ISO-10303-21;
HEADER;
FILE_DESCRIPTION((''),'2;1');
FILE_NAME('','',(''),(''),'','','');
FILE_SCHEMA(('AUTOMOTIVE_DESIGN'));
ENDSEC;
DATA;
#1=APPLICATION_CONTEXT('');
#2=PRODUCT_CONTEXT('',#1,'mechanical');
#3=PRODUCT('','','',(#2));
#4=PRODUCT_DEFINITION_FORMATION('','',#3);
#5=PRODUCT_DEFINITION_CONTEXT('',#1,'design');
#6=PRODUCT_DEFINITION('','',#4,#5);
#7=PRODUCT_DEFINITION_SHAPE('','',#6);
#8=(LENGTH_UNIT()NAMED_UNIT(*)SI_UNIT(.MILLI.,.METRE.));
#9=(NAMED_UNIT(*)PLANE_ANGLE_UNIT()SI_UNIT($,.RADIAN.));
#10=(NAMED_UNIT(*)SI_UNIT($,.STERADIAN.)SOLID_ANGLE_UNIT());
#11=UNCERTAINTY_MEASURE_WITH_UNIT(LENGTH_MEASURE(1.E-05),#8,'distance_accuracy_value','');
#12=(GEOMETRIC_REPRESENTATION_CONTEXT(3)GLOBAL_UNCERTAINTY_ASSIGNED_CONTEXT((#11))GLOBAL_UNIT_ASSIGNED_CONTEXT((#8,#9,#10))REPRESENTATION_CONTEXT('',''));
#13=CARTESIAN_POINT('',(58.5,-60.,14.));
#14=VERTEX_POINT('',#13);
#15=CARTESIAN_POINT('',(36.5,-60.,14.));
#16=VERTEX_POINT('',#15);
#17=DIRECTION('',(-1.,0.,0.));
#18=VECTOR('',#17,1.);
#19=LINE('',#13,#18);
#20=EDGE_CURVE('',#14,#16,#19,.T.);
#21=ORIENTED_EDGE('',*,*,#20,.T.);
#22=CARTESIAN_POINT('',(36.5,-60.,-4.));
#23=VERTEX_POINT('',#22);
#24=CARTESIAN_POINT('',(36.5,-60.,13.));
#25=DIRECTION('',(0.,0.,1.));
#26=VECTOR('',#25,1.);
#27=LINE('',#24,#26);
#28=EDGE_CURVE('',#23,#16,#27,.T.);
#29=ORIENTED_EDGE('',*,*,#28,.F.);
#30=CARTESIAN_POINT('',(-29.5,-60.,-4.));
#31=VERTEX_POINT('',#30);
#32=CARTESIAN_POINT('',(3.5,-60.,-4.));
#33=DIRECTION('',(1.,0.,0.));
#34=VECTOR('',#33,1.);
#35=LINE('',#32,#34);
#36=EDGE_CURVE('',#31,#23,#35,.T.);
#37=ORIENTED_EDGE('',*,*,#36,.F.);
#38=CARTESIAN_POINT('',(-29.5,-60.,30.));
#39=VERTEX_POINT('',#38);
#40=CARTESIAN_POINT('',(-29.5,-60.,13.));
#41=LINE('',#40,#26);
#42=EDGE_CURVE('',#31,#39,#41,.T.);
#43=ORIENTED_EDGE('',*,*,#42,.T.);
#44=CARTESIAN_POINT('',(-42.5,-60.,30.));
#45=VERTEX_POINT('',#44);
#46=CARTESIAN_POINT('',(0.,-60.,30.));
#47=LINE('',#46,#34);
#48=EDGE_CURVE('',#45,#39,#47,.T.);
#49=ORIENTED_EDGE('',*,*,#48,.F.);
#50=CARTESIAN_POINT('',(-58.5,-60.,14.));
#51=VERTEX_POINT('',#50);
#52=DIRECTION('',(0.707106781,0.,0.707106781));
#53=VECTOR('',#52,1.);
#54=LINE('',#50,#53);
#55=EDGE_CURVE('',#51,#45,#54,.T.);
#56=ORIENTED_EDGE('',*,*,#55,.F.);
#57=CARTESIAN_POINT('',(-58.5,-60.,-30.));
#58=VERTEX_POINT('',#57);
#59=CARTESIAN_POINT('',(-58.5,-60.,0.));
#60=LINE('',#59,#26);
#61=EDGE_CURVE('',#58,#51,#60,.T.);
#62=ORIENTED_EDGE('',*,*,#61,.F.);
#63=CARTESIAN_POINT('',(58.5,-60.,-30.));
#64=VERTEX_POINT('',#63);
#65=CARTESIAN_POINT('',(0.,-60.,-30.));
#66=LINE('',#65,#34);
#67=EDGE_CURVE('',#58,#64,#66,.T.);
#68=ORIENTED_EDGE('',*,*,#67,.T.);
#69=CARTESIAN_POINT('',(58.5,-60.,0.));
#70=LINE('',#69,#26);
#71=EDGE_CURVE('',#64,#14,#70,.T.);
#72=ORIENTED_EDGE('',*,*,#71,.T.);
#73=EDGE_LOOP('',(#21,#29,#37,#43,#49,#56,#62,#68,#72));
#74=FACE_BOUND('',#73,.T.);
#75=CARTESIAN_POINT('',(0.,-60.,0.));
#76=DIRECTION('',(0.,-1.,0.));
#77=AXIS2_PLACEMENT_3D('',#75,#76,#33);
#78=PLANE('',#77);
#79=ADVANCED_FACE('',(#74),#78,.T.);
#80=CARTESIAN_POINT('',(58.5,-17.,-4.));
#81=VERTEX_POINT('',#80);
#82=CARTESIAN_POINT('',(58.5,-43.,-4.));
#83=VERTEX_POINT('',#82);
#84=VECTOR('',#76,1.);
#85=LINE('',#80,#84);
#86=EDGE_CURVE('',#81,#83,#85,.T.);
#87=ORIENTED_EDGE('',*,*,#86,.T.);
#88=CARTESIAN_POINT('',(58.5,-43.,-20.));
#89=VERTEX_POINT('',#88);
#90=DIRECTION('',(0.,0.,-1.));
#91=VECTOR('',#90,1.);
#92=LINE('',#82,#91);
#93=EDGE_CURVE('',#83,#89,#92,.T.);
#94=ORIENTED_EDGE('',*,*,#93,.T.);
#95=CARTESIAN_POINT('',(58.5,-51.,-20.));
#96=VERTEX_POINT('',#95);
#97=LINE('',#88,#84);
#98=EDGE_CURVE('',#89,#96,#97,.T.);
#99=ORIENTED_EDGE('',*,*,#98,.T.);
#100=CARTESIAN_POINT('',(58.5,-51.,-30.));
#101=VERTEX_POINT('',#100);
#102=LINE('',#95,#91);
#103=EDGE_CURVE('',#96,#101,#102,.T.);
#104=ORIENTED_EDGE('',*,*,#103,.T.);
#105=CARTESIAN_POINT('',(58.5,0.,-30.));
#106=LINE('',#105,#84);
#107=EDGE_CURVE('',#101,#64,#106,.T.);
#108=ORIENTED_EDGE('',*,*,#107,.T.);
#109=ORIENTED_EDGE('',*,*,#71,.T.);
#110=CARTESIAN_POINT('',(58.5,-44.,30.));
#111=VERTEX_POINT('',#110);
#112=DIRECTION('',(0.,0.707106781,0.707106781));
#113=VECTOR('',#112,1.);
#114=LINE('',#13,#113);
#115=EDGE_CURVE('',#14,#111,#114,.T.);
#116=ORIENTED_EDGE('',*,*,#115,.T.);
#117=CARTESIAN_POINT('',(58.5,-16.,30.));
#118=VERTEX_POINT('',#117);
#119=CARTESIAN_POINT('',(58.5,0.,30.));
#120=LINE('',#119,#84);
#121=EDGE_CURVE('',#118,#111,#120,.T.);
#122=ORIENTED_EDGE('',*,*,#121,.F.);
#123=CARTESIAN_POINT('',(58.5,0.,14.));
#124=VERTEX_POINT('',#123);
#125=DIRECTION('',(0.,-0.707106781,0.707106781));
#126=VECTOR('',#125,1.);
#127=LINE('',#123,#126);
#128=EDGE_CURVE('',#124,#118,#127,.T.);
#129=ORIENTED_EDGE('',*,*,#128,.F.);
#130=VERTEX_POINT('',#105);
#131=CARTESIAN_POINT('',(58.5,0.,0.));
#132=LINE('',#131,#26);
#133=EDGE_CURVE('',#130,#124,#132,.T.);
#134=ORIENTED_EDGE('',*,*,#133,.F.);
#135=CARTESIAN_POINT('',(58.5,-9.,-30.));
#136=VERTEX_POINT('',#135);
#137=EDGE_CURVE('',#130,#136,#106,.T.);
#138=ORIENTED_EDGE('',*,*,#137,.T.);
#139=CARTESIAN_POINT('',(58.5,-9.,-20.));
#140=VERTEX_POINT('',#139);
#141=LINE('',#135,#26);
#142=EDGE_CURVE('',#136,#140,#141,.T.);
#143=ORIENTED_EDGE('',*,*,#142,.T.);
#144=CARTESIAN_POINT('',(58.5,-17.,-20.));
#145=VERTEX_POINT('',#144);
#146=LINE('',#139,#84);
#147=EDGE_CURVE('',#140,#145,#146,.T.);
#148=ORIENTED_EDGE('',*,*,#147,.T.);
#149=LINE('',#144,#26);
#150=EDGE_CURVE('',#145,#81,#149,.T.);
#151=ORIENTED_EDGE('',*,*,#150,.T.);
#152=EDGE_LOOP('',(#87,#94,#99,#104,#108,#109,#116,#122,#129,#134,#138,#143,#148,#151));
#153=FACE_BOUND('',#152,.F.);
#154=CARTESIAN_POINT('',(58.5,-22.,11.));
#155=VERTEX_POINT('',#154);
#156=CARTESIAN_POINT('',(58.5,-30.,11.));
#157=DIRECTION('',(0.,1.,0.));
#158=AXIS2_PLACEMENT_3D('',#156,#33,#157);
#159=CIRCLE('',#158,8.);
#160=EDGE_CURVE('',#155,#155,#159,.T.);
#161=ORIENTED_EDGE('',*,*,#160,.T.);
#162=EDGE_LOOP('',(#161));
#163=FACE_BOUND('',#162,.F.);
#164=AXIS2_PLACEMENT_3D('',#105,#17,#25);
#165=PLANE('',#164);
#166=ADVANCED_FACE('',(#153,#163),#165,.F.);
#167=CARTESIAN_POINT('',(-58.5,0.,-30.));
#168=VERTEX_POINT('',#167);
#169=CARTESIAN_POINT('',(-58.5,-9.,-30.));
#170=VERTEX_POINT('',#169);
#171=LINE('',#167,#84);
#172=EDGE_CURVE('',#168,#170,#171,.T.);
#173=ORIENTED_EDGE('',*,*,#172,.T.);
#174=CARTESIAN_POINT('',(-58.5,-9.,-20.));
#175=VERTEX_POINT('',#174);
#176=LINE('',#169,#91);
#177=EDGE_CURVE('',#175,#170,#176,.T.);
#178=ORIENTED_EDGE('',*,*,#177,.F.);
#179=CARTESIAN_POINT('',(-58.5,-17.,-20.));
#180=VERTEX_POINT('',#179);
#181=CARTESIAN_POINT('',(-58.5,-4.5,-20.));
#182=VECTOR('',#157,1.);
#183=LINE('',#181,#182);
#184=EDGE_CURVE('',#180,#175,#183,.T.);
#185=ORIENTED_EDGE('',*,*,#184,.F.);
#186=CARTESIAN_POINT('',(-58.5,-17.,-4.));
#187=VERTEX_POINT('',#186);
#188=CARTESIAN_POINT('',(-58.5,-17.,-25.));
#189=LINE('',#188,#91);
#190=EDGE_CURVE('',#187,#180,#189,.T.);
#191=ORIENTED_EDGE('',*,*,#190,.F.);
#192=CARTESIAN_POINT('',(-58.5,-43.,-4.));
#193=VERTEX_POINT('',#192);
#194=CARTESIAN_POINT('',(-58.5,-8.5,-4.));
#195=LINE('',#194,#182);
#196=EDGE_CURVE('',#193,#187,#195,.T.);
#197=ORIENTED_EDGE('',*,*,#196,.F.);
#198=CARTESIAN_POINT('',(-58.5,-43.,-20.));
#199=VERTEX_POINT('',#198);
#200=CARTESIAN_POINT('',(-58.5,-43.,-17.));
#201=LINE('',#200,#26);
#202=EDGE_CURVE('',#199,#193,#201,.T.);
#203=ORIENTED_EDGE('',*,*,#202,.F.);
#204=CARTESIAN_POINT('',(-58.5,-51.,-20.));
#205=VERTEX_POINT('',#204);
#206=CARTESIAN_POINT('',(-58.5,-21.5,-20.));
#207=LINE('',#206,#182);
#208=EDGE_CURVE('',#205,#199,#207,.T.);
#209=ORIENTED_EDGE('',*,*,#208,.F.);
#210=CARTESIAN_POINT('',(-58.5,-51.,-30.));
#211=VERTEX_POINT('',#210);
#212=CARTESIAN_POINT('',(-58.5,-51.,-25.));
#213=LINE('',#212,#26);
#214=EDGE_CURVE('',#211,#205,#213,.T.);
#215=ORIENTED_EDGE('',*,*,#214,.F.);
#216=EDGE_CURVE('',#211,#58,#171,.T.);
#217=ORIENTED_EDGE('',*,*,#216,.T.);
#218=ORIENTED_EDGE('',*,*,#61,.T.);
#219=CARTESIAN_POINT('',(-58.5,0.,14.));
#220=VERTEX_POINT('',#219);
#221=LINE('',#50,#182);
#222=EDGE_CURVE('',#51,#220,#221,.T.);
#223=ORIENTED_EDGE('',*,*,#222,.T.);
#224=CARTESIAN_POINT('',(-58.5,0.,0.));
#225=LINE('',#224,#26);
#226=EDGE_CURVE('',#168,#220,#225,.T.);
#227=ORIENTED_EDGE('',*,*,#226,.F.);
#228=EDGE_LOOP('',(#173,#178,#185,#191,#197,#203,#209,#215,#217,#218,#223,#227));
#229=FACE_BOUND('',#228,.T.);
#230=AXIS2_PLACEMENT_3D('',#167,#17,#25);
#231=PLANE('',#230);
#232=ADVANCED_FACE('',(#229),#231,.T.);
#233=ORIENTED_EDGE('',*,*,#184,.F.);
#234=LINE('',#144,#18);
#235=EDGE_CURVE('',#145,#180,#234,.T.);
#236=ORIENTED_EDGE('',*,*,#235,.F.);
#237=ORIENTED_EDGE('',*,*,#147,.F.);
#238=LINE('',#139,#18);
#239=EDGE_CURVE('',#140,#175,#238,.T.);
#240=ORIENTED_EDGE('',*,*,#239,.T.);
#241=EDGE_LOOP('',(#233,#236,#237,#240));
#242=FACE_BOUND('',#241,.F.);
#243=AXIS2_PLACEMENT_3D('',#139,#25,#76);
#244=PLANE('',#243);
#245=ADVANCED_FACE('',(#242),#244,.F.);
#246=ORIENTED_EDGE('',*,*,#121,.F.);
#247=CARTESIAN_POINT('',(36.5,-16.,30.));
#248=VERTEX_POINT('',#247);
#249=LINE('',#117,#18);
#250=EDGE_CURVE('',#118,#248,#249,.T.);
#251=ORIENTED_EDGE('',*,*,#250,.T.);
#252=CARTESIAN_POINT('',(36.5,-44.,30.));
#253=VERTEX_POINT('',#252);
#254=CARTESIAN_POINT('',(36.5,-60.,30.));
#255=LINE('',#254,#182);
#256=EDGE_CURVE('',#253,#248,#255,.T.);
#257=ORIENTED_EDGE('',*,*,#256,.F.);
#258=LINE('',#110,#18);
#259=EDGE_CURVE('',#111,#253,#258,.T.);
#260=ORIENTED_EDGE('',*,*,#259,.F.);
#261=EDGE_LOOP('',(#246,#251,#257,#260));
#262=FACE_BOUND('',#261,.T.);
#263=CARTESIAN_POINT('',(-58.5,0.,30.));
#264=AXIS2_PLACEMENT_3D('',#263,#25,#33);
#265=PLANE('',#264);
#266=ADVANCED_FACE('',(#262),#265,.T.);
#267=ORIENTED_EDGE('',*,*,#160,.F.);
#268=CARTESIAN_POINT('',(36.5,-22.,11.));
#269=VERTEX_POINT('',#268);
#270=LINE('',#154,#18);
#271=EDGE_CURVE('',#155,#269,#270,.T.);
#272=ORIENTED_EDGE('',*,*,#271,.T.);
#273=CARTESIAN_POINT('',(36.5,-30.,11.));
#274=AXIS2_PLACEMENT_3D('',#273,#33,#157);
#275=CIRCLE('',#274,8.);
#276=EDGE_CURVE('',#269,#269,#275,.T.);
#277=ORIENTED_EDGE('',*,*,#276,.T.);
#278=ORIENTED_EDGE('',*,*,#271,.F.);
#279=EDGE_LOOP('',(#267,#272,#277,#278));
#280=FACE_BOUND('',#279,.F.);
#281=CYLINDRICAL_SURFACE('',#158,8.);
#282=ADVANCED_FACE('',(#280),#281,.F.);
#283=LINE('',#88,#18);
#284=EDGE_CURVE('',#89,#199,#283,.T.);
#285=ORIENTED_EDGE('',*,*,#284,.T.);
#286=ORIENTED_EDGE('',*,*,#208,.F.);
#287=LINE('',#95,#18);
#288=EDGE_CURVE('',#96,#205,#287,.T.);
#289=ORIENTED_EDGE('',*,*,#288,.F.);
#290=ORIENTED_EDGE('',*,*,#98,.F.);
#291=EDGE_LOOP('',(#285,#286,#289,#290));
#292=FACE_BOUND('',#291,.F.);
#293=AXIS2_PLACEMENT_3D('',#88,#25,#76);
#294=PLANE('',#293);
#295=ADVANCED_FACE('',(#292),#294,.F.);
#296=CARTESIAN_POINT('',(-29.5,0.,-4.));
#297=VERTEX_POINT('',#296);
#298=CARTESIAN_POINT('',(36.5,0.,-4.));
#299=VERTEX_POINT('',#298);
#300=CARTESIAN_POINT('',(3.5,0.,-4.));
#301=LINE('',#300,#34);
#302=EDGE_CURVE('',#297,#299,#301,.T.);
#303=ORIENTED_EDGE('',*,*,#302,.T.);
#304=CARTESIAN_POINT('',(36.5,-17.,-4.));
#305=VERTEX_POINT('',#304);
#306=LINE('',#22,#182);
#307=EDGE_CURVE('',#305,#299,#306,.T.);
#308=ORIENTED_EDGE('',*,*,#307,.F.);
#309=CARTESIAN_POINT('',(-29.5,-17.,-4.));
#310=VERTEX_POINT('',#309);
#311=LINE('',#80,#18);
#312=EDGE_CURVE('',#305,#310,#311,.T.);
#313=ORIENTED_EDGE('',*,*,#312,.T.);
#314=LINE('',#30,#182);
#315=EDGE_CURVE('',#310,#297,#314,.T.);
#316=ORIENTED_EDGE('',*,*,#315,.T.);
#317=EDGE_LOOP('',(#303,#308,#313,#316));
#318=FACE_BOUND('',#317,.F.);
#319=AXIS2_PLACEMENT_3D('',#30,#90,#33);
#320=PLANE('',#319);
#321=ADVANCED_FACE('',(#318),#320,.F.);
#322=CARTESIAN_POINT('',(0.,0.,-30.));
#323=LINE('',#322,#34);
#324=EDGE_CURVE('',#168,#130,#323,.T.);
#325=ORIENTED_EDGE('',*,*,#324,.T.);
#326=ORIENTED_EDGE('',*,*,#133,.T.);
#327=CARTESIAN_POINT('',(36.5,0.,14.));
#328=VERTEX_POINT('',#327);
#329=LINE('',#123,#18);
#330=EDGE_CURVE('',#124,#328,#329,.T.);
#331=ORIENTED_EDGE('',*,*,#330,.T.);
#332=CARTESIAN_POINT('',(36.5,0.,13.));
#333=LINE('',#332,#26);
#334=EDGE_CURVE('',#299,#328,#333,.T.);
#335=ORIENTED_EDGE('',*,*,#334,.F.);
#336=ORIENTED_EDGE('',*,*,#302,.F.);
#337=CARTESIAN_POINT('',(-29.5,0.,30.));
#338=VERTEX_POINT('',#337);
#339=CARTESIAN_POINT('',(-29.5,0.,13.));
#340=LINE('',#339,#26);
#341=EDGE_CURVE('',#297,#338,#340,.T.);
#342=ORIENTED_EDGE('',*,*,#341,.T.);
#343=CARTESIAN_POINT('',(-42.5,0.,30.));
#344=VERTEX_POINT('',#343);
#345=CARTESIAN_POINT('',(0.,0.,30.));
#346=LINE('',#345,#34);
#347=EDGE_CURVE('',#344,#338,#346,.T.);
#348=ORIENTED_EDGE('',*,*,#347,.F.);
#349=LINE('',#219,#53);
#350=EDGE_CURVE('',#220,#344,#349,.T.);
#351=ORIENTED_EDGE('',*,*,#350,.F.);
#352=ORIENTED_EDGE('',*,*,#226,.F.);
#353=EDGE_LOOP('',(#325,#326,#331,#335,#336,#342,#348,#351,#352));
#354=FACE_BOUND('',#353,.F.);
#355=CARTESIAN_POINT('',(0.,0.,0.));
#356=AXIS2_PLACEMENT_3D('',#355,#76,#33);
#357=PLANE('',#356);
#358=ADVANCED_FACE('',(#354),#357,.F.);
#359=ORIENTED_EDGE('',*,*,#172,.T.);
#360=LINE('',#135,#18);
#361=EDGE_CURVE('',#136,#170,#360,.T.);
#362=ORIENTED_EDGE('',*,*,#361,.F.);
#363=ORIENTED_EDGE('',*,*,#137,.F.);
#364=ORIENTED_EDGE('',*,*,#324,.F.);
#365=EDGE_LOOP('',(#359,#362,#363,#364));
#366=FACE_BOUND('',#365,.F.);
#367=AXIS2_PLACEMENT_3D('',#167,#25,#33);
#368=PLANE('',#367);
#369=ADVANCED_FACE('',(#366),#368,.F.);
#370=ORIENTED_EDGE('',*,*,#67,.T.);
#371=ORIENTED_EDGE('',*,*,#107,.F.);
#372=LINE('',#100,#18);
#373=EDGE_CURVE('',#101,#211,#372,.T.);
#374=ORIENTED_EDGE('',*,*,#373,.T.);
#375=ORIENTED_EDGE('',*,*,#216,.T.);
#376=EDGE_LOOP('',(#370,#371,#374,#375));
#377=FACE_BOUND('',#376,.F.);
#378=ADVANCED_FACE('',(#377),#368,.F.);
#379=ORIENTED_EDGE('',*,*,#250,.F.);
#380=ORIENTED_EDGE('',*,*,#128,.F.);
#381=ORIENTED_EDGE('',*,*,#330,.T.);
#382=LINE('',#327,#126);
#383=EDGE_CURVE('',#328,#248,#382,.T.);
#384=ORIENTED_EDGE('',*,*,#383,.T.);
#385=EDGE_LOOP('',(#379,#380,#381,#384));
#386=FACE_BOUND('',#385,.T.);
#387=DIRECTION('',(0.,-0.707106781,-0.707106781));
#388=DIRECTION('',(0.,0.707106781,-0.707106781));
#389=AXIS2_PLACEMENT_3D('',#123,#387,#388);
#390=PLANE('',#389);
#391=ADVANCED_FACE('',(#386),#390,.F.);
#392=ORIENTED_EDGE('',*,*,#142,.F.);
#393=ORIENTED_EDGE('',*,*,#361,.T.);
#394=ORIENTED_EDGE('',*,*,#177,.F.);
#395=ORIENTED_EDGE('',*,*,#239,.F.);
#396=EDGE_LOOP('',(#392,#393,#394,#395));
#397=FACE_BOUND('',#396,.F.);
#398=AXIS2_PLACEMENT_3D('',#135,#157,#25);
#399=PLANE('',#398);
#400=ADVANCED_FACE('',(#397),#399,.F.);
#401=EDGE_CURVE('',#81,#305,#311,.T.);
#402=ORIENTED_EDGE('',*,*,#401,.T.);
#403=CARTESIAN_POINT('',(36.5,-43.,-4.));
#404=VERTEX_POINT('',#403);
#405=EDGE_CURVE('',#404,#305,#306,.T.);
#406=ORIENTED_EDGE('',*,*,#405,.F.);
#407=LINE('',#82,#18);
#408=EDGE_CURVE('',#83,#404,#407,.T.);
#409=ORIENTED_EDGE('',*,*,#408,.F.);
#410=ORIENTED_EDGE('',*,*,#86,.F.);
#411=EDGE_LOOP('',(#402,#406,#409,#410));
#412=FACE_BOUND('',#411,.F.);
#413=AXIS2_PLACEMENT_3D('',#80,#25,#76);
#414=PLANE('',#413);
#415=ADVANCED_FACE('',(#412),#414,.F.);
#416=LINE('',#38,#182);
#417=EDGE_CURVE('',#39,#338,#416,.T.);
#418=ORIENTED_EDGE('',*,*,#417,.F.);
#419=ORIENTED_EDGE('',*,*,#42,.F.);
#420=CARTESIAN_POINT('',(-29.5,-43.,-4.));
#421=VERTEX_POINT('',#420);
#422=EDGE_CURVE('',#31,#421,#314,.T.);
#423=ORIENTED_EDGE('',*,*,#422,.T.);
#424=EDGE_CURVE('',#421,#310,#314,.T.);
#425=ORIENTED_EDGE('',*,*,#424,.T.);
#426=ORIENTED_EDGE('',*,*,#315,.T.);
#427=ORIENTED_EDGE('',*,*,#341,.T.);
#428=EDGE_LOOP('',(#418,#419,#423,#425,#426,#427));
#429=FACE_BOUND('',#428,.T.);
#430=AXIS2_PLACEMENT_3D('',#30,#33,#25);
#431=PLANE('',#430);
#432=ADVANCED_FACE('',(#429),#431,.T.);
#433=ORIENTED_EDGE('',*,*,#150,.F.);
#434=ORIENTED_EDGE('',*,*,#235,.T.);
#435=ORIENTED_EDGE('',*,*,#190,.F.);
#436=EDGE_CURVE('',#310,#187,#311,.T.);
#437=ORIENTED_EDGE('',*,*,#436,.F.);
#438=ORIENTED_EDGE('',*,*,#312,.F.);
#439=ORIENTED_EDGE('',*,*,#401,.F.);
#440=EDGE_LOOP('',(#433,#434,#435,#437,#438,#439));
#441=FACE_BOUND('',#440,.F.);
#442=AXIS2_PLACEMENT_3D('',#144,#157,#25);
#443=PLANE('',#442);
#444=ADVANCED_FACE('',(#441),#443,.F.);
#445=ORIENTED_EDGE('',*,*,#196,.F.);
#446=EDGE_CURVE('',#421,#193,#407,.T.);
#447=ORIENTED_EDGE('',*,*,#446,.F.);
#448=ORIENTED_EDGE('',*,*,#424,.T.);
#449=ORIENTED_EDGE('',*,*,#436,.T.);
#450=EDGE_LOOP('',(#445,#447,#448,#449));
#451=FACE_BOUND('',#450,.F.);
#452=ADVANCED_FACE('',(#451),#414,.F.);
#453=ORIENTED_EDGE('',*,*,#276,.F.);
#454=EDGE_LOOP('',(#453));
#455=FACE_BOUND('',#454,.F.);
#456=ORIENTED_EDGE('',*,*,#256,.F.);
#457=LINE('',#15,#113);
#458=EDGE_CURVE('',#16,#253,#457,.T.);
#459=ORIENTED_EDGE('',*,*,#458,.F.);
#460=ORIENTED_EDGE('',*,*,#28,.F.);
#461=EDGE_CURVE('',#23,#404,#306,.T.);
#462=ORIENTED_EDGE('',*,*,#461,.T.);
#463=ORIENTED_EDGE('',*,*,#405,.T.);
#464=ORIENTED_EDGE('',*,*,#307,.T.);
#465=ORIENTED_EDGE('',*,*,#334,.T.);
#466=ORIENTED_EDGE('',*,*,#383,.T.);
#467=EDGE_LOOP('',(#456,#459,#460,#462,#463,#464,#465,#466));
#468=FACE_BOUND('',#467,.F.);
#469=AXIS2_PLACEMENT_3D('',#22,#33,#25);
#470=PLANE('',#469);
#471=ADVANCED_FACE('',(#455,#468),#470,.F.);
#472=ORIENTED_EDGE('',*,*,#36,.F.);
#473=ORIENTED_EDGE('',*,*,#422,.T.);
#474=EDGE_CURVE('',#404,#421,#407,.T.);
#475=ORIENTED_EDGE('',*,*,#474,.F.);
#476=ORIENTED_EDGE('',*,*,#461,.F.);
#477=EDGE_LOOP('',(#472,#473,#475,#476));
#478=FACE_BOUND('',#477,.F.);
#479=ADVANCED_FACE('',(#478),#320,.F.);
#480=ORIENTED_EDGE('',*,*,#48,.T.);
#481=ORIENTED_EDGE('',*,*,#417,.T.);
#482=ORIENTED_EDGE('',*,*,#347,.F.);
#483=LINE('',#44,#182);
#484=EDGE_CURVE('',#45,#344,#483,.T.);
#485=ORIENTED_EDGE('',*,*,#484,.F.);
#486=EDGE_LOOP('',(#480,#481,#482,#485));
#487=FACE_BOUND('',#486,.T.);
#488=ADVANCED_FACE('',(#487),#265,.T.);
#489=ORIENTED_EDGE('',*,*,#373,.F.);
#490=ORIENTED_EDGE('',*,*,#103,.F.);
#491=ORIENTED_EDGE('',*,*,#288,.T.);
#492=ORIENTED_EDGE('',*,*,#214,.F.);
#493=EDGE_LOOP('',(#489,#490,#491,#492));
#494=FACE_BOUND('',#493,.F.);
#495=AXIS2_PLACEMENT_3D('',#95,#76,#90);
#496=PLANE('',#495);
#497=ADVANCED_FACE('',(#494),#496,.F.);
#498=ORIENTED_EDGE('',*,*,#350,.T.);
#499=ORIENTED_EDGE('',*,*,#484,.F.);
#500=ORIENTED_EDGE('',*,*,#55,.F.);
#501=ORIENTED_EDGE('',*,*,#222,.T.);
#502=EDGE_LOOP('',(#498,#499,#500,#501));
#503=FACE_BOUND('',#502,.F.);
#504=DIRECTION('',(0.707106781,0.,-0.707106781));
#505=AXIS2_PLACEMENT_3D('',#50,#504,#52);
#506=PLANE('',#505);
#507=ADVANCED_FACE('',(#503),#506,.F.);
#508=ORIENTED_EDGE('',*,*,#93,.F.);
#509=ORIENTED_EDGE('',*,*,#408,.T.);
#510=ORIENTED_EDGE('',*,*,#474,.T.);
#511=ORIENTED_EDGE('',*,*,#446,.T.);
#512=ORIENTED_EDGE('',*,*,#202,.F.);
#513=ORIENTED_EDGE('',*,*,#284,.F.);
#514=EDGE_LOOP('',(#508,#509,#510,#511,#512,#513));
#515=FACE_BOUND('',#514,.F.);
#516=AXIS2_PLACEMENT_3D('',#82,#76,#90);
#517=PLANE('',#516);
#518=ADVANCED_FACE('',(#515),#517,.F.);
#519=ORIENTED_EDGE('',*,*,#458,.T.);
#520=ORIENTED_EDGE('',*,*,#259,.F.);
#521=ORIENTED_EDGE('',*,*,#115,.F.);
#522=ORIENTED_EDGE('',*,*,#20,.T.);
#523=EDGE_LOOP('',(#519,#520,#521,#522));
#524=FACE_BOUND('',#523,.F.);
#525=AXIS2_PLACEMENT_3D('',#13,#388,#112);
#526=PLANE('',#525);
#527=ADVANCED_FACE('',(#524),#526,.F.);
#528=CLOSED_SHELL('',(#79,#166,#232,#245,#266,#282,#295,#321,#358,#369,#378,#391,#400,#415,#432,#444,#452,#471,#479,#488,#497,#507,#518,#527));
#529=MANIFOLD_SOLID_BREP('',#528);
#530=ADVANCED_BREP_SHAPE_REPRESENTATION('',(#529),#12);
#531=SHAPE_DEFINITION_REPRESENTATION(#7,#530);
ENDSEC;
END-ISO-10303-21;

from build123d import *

# Parameters (mm, degrees)
F0_W      = 117
F0_H      = 60
F1_DEPTH  = 60
F2_W      = 66
F2_H      = 34
F3_DEPTH  = 60
F5_DEPTH  = 60
F7_DEPTH  = 22
F10_DEPTH = 117.001
F11_R     = 8
F12_DEPTH = 22


# Not quite as in the source:
# - a pattern or mirror of a feature is missing from the dataset's text; its kind, count and spacing are read off the source's solid


with BuildPart() as f1:
    # F0 (on Front) → F1 (new body)
    with BuildSketch(Plane.XZ):
        Rectangle(F0_W, F0_H)
    extrude(amount=F1_DEPTH)

    # F2 (on face) → F3 (cut, through all)
    with BuildSketch(Plane.XZ.offset(60)):
        with Locations((3.5, 13)):
            Rectangle(F2_W, F2_H)
    extrude(amount=-F3_DEPTH, mode=Mode.SUBTRACT)

    # F4 (on face) → F5 (cut, through all)
    with BuildSketch(Plane.XZ.offset(60)):
        Polygon((-58.5, 30), (-58.5, 14), (-42.5, 30), align=None)
    extrude(amount=-F5_DEPTH, mode=Mode.SUBTRACT)

    # F6 (on face) → F7 (cut, through all)
    with BuildSketch(Plane.YZ.offset(58.5)):
        Polygon((-60, 30), (-60, 14), (-44, 30), align=None)
    f7 = extrude(amount=-F7_DEPTH, mode=Mode.SUBTRACT)

    # F7_copies: F7 across plane
    add(f7.mirror(Plane.ZX.offset(-30)), mode=Mode.SUBTRACT)

    # F9 (on face) → F10 (cut, through all)
    with BuildSketch(Plane.YZ.offset(58.5)):
        Polygon((-51, -20), (-51, -30), (-9, -30), (-9, -20), (-17, -20), (-17, -4), (-43, -4), (-43, -20), align=None)
    extrude(amount=-F10_DEPTH, mode=Mode.SUBTRACT)

    # F11 (on face) → F12 (cut, through all)
    with BuildSketch(Plane.YZ.offset(58.5)):
        with Locations((-30, 11)):
            Circle(F11_R)
    extrude(amount=-F12_DEPTH, mode=Mode.SUBTRACT)


solid = f1.part
